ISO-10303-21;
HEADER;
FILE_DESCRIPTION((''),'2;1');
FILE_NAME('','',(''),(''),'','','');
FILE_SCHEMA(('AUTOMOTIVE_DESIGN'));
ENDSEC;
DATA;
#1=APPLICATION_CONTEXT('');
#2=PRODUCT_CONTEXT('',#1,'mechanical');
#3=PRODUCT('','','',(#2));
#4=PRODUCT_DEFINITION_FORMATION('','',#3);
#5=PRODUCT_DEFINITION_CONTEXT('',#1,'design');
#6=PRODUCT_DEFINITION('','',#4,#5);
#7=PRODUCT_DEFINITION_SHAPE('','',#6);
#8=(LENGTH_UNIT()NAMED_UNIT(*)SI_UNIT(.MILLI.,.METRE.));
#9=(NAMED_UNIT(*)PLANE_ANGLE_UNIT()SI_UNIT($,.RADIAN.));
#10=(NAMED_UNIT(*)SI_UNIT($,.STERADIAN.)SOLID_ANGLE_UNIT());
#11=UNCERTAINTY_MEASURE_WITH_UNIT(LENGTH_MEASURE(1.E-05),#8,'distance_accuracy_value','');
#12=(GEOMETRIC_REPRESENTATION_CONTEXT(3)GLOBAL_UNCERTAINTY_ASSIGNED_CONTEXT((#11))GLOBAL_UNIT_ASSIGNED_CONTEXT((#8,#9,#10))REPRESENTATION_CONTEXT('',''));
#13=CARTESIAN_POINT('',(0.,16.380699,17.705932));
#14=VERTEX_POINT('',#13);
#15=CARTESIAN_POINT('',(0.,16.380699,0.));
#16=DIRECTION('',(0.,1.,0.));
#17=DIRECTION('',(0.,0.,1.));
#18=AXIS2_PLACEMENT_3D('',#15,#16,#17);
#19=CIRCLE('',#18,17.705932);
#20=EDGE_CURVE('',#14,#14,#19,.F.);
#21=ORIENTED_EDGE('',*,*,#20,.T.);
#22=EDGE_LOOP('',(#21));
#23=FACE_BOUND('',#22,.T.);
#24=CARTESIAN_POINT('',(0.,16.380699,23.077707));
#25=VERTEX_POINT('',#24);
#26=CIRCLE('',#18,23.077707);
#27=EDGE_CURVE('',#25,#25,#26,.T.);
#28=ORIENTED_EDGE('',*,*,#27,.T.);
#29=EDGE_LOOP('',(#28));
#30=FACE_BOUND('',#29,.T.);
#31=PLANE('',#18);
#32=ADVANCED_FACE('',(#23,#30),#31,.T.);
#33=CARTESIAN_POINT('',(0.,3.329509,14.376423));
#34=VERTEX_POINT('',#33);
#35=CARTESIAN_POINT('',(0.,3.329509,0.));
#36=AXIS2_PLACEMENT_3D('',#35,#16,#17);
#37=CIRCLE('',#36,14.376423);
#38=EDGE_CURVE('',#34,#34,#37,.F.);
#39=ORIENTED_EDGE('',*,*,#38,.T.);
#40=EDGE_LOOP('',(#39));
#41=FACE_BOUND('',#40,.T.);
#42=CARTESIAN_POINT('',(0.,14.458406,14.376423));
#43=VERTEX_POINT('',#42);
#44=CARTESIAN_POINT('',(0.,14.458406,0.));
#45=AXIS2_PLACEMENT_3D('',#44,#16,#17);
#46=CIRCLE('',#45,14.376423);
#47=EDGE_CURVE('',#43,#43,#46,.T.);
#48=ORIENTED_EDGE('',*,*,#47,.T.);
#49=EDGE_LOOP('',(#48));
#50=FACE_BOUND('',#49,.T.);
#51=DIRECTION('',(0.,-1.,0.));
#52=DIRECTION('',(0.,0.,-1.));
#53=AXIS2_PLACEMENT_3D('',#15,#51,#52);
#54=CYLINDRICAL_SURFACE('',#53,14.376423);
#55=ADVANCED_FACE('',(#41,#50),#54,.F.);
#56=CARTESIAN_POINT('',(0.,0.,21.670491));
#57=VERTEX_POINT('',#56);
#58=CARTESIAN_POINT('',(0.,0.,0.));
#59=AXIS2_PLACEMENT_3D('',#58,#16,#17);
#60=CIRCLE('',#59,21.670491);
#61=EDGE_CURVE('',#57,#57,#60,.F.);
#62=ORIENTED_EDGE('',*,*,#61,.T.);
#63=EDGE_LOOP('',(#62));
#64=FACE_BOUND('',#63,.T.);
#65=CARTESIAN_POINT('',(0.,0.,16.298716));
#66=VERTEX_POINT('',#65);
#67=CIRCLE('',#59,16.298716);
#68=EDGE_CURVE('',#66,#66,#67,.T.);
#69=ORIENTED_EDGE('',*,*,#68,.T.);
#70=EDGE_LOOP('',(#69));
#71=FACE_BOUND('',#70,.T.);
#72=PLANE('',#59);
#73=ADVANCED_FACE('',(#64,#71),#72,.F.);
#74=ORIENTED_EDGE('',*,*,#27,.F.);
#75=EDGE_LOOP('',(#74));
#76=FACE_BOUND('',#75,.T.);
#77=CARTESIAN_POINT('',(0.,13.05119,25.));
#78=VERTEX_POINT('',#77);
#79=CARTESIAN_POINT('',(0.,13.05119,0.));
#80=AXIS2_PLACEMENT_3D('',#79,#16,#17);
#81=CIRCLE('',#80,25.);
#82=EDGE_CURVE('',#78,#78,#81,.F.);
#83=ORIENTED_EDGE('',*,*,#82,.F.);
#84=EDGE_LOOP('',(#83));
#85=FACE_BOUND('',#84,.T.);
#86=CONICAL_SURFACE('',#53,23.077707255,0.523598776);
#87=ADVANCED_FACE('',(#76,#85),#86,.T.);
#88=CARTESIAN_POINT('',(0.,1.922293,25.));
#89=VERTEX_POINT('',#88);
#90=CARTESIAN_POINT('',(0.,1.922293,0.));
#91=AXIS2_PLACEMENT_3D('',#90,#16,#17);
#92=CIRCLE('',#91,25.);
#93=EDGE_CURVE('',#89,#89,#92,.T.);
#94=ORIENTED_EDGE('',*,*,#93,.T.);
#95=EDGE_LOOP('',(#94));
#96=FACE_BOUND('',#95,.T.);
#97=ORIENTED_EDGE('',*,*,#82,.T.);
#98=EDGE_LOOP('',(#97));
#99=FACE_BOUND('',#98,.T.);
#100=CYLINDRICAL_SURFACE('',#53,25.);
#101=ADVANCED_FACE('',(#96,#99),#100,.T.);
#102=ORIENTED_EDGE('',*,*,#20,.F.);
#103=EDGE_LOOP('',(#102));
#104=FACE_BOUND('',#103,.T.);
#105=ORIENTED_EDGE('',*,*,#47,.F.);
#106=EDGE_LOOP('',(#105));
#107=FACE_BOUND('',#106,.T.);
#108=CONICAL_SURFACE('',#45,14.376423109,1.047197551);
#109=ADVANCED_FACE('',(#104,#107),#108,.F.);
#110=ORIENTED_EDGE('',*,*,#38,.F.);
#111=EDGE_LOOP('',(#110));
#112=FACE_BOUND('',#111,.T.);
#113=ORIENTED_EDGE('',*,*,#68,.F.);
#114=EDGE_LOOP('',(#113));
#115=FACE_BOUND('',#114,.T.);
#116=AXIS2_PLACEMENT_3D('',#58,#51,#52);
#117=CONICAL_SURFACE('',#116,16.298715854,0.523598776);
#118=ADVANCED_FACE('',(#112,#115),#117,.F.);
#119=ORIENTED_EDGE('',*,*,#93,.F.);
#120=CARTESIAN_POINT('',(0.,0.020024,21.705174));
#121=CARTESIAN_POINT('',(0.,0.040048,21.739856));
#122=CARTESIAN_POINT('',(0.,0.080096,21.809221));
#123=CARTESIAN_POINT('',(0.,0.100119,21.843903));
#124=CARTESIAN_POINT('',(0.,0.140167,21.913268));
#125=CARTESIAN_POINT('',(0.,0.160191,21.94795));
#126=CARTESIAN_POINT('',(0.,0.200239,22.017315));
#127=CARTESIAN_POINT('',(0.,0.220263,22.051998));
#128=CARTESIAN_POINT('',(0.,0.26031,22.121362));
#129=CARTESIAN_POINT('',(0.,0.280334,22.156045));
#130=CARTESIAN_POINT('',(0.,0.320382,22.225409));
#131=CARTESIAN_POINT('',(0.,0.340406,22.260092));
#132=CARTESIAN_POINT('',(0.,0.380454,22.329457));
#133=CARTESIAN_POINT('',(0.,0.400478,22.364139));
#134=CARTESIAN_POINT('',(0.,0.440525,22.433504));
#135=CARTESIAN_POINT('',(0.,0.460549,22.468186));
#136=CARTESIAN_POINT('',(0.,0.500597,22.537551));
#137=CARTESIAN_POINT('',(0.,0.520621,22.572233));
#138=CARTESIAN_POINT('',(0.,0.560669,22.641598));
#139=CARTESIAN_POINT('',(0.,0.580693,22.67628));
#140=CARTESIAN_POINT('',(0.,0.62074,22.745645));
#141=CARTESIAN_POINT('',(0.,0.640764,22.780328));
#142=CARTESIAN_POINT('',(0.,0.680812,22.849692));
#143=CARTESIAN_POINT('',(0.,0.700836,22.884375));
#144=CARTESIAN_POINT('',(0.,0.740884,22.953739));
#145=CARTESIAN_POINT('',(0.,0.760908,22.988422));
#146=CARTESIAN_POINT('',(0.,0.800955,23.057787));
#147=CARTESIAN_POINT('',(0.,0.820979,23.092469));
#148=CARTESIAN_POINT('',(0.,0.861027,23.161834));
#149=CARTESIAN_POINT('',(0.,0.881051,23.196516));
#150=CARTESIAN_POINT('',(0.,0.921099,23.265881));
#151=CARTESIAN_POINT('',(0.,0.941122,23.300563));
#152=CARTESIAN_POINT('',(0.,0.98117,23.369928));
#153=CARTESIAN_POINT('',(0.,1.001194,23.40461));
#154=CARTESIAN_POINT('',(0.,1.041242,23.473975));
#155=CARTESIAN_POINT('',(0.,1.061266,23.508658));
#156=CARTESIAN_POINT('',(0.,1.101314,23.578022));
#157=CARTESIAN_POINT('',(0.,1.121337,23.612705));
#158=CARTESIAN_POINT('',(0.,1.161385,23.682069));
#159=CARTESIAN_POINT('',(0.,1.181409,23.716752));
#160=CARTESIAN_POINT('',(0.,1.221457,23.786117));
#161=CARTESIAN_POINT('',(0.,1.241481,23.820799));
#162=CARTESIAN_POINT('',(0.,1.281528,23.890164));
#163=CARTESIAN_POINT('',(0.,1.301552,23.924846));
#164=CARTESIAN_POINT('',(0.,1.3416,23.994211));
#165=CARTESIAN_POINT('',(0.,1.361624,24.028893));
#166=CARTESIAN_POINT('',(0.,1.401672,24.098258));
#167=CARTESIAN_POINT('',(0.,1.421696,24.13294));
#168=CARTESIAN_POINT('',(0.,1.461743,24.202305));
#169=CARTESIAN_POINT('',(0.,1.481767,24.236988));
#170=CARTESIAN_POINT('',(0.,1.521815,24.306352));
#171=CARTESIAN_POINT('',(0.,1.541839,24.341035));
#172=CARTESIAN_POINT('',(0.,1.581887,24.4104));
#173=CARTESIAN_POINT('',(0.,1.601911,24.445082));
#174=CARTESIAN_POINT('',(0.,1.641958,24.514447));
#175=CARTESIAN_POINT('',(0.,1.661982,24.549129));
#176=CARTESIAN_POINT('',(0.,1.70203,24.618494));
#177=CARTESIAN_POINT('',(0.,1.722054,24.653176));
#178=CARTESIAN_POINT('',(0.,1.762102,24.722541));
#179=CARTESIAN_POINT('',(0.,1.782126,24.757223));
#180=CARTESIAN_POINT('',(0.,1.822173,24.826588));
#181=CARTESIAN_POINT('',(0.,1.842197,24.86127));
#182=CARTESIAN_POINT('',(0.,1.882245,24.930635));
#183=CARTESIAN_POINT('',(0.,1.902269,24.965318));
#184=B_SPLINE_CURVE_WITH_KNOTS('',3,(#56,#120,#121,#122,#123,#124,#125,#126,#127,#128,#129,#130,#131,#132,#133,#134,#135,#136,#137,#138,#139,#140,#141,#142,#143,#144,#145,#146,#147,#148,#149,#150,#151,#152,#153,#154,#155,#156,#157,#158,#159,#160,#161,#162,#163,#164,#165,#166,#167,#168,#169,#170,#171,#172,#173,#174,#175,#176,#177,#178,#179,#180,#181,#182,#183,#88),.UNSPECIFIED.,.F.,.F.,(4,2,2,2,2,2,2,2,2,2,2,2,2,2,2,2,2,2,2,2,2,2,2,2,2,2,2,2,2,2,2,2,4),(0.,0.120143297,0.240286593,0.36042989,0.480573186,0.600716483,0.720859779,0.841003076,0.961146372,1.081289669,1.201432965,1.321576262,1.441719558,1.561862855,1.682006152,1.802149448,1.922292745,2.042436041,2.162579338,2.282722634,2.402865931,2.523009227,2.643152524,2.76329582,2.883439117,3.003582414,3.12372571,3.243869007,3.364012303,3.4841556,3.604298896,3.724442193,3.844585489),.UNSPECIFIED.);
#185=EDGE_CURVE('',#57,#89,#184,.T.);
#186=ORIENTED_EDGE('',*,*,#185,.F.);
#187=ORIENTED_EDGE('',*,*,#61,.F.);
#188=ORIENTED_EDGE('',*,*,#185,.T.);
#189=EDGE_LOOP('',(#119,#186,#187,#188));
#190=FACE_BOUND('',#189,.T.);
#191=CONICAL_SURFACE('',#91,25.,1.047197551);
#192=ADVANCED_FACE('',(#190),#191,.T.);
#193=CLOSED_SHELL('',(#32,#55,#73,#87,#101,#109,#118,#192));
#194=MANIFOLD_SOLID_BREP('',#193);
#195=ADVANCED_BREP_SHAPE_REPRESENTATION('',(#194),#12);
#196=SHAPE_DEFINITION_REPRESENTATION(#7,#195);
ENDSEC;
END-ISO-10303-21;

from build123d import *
from OCP.BRepFilletAPI import BRepFilletAPI_MakeChamfer

# Parameters (mm, degrees)
SKETCH1_R           = 25
BOSS_EXTRUDE1_DEPTH = 16.380699025
SKETCH2_R           = 14.376423109
CUT_EXTRUDE1_DEPTH  = 39.965719556
CHAMFER1_SIZE       = 3.329508701
CHAMFER1_SIZE2      = 1.922292745


with BuildPart() as part:
    # Sketch1 → Boss-Extrude1 (new body)
    with BuildSketch(Plane(origin=(0, 0, 0), x_dir=(1, 0, 0), z_dir=(0, 1, 0))):
        Circle(SKETCH1_R)
    extrude(amount=BOSS_EXTRUDE1_DEPTH)

    # Sketch2 → Cut-Extrude1 (cut, through all)
    with BuildSketch(Plane(origin=(0, 0, 0), x_dir=(1, 0, 0), z_dir=(0, 1, 0))):
        Circle(SKETCH2_R)
    extrude(amount=CUT_EXTRUDE1_DEPTH, mode=Mode.SUBTRACT)

    # Chamfer1: one chamfer whose edges measure the first distance from different faces: ONE call of the kernel's chamfer builder (chamfer() names one face for all edges)
    chamfer1_edges_1 = [part.edges().sort_by_distance(p)[0] for p in [
        (-14.376423109, 16.380699025, 0),
    ]]
    chamfer1_side_1 = [part.faces().sort_by_distance(p)[0] for p in [
        (-24.292893219, 16.380699025, 0),
    ]]
    chamfer1_edges_2 = [part.edges().sort_by_distance(p)[0] for p in [
        (-14.376423109, 0, 0),
    ]]
    chamfer1_side_2 = [part.faces().sort_by_distance(p)[0] for p in [
        (-14.376423109, 8.190349512, 0),
    ]]
    chamfer1_edges_3 = [part.edges().sort_by_distance(p)[0] for p in [
        (-25, 0, 0),
    ]]
    chamfer1_side_3 = [part.faces().sort_by_distance(p)[0] for p in [
        (-24.292893219, 0, 0),
    ]]
    chamfer1_edges_4 = [part.edges().sort_by_distance(p)[0] for p in [
        (-25, 16.380699025, 0),
    ]]
    chamfer1_side_4 = [part.faces().sort_by_distance(p)[0] for p in [
        (-25, 8.190349512, 0),
    ]]
    chamfer1 = BRepFilletAPI_MakeChamfer(part.part.solid().wrapped)
    for e in chamfer1_edges_1:
        chamfer1.Add(CHAMFER1_SIZE, CHAMFER1_SIZE2, e.wrapped, chamfer1_side_1[0].wrapped)  # the first distance lies on this face
    for e in chamfer1_edges_2:
        chamfer1.Add(CHAMFER1_SIZE, CHAMFER1_SIZE2, e.wrapped, chamfer1_side_2[0].wrapped)  # the first distance lies on this face
    for e in chamfer1_edges_3:
        chamfer1.Add(CHAMFER1_SIZE, CHAMFER1_SIZE2, e.wrapped, chamfer1_side_3[0].wrapped)  # the first distance lies on this face
    for e in chamfer1_edges_4:
        chamfer1.Add(CHAMFER1_SIZE, CHAMFER1_SIZE2, e.wrapped, chamfer1_side_4[0].wrapped)  # the first distance lies on this face
    add(Compound.cast(chamfer1.Shape()), mode=Mode.REPLACE)


solid = part.part
